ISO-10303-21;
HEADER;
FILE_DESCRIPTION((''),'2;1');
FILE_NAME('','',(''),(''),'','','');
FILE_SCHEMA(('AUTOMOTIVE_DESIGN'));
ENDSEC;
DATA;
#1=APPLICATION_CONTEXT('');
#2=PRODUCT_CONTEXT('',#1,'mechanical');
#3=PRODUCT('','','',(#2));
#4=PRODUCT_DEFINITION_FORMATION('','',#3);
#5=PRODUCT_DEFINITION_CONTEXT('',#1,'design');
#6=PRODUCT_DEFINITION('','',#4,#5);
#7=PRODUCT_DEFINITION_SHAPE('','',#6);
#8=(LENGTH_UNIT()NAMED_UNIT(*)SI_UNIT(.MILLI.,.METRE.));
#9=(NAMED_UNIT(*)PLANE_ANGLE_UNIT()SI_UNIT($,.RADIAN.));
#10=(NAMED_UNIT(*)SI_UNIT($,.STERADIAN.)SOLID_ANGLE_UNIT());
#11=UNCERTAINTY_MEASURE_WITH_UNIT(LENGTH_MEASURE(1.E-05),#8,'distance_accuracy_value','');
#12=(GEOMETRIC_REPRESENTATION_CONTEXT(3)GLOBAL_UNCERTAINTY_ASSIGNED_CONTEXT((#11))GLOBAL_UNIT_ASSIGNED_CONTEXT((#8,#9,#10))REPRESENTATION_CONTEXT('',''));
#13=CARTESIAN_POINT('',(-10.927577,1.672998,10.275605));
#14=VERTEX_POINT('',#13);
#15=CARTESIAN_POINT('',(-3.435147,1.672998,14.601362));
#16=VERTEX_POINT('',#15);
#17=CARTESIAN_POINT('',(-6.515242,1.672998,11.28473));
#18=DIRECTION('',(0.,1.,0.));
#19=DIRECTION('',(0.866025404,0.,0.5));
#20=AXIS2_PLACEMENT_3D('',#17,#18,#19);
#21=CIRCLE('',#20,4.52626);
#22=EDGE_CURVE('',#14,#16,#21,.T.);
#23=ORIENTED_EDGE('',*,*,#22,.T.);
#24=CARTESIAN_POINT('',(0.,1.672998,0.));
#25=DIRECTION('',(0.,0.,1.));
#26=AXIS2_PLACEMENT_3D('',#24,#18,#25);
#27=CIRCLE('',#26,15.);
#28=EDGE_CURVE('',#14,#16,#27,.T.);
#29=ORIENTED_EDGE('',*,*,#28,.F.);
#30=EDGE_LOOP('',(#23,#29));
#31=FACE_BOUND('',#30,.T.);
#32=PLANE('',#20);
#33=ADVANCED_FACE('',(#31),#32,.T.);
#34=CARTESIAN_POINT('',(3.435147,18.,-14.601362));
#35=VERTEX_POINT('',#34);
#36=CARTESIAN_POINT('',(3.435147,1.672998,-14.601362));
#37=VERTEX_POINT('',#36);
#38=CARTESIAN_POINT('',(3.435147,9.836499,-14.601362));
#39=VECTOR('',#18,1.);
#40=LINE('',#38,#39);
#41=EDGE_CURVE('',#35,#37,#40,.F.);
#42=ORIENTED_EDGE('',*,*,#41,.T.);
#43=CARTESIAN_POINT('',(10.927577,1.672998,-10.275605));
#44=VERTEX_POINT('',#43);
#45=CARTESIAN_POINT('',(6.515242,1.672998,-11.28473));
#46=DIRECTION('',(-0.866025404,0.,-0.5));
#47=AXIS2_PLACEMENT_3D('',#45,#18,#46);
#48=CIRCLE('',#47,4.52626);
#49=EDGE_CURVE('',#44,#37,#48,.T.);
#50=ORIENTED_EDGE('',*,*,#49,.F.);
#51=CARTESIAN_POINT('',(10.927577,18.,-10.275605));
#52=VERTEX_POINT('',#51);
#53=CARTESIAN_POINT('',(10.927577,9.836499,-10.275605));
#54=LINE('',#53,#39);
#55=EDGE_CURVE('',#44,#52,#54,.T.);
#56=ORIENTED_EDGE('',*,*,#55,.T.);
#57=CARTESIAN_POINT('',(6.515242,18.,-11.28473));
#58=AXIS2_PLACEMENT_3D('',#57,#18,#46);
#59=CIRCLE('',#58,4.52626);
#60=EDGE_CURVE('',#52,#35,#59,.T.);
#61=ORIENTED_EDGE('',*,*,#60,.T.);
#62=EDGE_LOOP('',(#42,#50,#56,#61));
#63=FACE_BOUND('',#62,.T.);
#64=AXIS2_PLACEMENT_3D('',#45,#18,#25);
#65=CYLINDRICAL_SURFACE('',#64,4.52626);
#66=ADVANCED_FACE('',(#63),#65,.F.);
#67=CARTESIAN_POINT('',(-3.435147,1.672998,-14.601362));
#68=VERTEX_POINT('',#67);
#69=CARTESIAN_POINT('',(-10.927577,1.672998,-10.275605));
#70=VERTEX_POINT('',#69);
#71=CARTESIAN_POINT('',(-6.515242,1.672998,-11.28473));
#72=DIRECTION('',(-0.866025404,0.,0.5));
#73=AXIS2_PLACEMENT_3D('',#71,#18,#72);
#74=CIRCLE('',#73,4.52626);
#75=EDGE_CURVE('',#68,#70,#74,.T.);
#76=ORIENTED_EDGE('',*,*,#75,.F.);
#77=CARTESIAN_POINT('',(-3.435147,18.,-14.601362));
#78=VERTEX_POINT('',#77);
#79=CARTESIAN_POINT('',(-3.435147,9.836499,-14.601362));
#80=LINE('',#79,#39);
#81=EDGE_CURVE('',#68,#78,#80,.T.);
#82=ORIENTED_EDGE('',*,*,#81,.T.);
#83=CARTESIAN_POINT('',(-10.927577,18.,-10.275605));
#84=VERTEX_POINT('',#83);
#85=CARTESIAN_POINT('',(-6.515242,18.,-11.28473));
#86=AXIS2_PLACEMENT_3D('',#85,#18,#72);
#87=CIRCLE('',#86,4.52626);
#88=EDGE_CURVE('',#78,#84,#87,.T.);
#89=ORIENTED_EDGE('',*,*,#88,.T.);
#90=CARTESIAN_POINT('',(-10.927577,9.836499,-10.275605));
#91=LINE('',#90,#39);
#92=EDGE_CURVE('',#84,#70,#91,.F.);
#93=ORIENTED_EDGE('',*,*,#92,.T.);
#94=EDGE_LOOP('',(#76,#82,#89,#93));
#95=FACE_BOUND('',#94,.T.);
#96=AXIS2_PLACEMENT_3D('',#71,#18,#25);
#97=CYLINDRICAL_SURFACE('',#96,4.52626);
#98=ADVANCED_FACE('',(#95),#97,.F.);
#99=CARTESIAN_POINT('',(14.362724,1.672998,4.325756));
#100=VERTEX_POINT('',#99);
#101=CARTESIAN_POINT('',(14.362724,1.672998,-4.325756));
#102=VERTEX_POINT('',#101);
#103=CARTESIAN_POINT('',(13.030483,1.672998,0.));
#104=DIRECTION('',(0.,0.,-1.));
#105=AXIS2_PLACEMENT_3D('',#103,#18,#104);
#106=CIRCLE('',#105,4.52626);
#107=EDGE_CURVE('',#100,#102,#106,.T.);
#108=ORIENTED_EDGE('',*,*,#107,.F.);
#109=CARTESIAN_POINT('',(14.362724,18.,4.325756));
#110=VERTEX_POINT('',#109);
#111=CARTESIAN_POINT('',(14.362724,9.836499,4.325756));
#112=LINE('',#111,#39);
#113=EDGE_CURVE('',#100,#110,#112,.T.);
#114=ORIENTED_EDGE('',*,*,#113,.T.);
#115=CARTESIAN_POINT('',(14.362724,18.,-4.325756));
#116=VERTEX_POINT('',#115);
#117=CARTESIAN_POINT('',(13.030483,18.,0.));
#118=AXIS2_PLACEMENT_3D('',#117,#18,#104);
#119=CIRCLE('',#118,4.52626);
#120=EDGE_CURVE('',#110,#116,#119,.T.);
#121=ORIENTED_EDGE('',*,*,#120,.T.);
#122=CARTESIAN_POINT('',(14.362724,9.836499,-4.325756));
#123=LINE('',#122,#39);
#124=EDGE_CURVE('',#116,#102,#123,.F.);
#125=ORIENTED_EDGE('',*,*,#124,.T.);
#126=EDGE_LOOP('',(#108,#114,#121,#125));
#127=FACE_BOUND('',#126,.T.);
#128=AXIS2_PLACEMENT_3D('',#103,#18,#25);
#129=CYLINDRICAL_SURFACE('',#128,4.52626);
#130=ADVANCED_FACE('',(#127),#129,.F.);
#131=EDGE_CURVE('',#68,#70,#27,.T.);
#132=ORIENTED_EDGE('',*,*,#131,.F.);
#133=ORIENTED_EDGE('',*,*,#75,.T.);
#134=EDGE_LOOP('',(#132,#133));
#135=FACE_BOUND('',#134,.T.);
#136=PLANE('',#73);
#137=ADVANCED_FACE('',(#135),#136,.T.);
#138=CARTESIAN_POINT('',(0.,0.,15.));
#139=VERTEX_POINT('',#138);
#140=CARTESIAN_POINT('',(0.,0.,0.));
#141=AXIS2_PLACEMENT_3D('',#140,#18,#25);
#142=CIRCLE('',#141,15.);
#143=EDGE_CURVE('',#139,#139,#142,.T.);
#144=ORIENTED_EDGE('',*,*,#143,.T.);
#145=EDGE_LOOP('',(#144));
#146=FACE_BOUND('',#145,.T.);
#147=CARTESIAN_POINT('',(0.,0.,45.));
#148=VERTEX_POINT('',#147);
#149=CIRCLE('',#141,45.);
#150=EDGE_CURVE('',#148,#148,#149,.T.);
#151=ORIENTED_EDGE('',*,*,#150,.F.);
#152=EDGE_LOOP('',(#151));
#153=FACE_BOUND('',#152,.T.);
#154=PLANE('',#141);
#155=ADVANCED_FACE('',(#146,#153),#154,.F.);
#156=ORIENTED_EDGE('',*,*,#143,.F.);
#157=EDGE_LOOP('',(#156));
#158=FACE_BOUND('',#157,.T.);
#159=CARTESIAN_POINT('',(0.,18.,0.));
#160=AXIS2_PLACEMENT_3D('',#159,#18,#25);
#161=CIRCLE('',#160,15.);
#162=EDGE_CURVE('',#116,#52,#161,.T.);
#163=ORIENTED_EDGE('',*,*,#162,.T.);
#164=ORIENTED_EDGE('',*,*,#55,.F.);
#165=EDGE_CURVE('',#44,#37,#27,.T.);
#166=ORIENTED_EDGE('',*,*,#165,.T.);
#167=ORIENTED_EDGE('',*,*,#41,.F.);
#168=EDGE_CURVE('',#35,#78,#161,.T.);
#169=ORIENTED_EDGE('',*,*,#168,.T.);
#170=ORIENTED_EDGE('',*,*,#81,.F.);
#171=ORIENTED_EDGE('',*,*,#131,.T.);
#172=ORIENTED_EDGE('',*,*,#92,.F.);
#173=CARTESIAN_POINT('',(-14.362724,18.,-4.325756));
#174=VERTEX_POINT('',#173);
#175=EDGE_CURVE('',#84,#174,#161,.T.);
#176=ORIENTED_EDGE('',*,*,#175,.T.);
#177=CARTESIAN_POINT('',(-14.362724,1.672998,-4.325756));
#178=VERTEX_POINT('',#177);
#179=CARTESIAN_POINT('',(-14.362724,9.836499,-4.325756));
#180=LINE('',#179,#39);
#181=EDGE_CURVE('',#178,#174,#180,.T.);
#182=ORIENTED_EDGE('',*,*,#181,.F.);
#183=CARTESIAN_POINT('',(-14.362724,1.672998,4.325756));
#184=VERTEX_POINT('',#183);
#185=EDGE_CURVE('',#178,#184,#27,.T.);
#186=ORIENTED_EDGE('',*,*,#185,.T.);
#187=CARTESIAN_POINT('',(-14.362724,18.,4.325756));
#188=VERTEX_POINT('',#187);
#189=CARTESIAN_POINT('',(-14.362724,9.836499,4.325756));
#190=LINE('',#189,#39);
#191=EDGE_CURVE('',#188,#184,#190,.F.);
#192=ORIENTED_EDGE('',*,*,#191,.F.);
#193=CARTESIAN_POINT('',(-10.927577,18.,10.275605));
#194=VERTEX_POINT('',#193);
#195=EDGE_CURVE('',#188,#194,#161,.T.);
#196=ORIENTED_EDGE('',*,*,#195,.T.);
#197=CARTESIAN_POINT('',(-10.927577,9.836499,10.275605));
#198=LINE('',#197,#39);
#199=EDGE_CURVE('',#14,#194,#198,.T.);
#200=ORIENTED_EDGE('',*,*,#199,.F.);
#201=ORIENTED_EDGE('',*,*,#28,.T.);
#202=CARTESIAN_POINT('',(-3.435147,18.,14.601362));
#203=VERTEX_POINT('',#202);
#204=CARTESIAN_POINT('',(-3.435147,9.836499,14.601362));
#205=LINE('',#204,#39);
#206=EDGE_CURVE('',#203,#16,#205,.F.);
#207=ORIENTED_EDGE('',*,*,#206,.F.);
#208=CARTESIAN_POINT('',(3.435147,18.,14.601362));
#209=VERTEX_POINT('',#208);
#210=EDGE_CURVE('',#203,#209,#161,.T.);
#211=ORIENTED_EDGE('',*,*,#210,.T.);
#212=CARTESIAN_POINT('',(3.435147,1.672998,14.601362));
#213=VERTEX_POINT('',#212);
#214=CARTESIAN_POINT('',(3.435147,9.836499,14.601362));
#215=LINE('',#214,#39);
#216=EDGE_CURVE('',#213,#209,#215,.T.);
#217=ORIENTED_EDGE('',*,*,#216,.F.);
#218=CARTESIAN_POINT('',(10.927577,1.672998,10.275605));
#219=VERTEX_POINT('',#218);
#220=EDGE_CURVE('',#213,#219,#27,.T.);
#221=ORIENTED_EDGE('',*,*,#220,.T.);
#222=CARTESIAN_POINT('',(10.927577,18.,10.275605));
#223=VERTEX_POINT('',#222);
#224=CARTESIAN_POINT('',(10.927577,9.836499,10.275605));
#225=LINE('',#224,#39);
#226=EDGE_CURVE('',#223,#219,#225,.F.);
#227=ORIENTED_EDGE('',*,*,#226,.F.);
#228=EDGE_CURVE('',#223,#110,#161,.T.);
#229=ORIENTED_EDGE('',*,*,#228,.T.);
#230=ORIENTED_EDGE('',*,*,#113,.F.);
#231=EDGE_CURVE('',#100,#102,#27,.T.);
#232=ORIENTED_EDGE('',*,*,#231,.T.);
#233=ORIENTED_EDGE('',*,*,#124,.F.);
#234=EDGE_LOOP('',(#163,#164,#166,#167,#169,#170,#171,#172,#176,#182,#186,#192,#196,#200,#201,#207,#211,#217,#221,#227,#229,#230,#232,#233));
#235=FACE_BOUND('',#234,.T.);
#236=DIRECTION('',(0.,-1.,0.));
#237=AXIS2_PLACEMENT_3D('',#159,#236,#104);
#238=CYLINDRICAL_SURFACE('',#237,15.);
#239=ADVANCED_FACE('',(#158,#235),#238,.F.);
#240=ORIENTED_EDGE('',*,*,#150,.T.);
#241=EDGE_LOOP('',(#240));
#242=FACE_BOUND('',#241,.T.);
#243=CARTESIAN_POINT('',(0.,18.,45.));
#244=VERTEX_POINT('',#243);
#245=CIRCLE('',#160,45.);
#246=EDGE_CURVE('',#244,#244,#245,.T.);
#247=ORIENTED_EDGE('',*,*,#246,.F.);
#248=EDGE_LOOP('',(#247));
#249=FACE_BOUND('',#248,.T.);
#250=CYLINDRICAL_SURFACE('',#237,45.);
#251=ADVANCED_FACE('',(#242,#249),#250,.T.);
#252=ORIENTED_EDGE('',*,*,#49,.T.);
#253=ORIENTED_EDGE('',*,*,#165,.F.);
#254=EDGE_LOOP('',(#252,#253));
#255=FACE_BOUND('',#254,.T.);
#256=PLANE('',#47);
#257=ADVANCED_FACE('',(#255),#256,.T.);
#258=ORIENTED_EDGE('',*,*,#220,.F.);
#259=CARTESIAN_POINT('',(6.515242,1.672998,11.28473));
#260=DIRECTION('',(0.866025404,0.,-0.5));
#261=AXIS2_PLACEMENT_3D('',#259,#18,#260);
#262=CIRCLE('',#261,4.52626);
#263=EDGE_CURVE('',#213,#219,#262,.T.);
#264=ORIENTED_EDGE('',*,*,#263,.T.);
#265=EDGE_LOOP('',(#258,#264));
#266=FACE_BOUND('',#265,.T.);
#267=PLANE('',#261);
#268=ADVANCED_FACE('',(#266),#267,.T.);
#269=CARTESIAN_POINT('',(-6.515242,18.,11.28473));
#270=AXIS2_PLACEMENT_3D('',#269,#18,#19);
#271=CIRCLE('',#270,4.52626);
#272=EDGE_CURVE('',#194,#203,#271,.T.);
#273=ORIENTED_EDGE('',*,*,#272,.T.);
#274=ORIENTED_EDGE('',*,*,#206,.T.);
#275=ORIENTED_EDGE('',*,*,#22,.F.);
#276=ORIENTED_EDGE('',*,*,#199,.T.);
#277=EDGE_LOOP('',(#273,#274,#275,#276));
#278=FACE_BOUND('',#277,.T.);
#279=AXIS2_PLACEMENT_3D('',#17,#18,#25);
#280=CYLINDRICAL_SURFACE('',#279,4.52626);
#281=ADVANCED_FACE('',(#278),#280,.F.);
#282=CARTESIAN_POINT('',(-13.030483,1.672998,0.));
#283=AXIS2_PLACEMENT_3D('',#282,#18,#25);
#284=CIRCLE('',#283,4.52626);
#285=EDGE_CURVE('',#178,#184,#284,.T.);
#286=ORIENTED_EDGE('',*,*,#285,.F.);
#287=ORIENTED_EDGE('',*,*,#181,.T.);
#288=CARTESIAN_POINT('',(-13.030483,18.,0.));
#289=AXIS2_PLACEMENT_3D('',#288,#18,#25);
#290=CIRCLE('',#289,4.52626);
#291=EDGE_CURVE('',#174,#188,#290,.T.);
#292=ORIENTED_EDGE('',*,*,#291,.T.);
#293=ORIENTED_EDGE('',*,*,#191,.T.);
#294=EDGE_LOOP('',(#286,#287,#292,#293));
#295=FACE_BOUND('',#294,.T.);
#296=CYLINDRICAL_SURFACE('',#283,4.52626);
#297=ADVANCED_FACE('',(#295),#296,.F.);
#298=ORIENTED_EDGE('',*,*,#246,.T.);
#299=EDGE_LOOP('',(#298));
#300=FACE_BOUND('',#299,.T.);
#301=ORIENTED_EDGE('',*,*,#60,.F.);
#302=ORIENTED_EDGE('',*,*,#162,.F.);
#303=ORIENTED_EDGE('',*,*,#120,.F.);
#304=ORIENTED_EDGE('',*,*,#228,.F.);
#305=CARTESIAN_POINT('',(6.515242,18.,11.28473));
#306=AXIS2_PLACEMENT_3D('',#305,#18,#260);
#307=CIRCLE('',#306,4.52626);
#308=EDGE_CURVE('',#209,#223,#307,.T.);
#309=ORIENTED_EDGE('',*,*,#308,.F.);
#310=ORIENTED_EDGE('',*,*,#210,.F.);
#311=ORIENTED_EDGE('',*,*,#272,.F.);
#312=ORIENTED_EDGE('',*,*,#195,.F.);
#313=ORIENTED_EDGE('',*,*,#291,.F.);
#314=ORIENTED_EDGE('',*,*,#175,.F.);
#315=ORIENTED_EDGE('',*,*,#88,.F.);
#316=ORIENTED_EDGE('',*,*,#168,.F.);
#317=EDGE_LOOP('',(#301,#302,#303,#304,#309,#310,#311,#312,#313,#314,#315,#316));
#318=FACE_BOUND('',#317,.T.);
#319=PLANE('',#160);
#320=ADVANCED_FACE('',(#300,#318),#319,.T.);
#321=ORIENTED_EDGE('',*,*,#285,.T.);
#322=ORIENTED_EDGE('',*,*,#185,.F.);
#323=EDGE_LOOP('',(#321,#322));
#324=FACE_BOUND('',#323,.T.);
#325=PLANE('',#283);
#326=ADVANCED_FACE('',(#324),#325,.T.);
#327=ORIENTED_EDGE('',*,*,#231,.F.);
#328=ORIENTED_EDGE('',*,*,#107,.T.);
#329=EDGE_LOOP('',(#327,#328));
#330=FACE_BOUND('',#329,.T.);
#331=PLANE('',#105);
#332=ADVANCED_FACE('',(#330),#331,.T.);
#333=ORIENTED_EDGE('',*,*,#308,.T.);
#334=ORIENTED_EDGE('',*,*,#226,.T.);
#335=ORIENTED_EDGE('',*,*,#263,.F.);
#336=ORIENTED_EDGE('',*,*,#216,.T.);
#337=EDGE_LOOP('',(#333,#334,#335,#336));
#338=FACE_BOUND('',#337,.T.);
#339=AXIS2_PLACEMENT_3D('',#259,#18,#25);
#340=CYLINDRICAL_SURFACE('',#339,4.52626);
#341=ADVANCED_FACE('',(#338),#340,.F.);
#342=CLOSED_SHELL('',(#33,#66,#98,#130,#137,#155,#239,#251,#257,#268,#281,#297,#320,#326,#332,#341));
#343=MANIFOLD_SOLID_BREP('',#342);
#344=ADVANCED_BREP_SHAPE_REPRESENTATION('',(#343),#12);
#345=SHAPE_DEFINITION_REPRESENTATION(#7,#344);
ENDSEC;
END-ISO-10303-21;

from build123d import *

# Parameters (mm, degrees)
SKETCH1_R           = 45
BOSS_EXTRUDE1_DEPTH = 18
SKETCH2_R           = 15
CUT_EXTRUDE1_DEPTH  = 67.136223055
SKETCH3_R           = 4.526260275
CUT_EXTRUDE2_DEPTH  = 16.327001944
CIRPATTERN1_COUNT   = 6


with BuildPart() as part:
    # Sketch1 → Boss-Extrude1 (new body)
    with BuildSketch(Plane(origin=(0, 0, 0), x_dir=(1, 0, 0), z_dir=(0, 1, 0))):
        Circle(SKETCH1_R)
    extrude(amount=BOSS_EXTRUDE1_DEPTH)

    # Sketch2 → Cut-Extrude1 (cut, through all)
    with BuildSketch(Plane(origin=(0, 0, 0), x_dir=(1, 0, 0), z_dir=(0, 1, 0))):
        Circle(SKETCH2_R)
    extrude(amount=CUT_EXTRUDE1_DEPTH, mode=Mode.SUBTRACT)

    # Sketch3 → Cut-Extrude2 (cut)
    with BuildSketch(Plane(origin=(0, 18, 0), x_dir=(1, 0, 0), z_dir=(0, 1, 0))):
        with Locations((-13.030483377, 0)):
            Circle(SKETCH3_R)
    cut_extrude2 = extrude(amount=-CUT_EXTRUDE2_DEPTH, mode=Mode.SUBTRACT)

    # CirPattern1: Cut-Extrude2 ×6 about axis
    cirpattern1_axis = Axis((0, 0, 0), (0, 1, 0))
    for i in range(1, CIRPATTERN1_COUNT):
        add(cut_extrude2.rotate(cirpattern1_axis, i * 360 / CIRPATTERN1_COUNT), mode=Mode.SUBTRACT)


solid = part.part
